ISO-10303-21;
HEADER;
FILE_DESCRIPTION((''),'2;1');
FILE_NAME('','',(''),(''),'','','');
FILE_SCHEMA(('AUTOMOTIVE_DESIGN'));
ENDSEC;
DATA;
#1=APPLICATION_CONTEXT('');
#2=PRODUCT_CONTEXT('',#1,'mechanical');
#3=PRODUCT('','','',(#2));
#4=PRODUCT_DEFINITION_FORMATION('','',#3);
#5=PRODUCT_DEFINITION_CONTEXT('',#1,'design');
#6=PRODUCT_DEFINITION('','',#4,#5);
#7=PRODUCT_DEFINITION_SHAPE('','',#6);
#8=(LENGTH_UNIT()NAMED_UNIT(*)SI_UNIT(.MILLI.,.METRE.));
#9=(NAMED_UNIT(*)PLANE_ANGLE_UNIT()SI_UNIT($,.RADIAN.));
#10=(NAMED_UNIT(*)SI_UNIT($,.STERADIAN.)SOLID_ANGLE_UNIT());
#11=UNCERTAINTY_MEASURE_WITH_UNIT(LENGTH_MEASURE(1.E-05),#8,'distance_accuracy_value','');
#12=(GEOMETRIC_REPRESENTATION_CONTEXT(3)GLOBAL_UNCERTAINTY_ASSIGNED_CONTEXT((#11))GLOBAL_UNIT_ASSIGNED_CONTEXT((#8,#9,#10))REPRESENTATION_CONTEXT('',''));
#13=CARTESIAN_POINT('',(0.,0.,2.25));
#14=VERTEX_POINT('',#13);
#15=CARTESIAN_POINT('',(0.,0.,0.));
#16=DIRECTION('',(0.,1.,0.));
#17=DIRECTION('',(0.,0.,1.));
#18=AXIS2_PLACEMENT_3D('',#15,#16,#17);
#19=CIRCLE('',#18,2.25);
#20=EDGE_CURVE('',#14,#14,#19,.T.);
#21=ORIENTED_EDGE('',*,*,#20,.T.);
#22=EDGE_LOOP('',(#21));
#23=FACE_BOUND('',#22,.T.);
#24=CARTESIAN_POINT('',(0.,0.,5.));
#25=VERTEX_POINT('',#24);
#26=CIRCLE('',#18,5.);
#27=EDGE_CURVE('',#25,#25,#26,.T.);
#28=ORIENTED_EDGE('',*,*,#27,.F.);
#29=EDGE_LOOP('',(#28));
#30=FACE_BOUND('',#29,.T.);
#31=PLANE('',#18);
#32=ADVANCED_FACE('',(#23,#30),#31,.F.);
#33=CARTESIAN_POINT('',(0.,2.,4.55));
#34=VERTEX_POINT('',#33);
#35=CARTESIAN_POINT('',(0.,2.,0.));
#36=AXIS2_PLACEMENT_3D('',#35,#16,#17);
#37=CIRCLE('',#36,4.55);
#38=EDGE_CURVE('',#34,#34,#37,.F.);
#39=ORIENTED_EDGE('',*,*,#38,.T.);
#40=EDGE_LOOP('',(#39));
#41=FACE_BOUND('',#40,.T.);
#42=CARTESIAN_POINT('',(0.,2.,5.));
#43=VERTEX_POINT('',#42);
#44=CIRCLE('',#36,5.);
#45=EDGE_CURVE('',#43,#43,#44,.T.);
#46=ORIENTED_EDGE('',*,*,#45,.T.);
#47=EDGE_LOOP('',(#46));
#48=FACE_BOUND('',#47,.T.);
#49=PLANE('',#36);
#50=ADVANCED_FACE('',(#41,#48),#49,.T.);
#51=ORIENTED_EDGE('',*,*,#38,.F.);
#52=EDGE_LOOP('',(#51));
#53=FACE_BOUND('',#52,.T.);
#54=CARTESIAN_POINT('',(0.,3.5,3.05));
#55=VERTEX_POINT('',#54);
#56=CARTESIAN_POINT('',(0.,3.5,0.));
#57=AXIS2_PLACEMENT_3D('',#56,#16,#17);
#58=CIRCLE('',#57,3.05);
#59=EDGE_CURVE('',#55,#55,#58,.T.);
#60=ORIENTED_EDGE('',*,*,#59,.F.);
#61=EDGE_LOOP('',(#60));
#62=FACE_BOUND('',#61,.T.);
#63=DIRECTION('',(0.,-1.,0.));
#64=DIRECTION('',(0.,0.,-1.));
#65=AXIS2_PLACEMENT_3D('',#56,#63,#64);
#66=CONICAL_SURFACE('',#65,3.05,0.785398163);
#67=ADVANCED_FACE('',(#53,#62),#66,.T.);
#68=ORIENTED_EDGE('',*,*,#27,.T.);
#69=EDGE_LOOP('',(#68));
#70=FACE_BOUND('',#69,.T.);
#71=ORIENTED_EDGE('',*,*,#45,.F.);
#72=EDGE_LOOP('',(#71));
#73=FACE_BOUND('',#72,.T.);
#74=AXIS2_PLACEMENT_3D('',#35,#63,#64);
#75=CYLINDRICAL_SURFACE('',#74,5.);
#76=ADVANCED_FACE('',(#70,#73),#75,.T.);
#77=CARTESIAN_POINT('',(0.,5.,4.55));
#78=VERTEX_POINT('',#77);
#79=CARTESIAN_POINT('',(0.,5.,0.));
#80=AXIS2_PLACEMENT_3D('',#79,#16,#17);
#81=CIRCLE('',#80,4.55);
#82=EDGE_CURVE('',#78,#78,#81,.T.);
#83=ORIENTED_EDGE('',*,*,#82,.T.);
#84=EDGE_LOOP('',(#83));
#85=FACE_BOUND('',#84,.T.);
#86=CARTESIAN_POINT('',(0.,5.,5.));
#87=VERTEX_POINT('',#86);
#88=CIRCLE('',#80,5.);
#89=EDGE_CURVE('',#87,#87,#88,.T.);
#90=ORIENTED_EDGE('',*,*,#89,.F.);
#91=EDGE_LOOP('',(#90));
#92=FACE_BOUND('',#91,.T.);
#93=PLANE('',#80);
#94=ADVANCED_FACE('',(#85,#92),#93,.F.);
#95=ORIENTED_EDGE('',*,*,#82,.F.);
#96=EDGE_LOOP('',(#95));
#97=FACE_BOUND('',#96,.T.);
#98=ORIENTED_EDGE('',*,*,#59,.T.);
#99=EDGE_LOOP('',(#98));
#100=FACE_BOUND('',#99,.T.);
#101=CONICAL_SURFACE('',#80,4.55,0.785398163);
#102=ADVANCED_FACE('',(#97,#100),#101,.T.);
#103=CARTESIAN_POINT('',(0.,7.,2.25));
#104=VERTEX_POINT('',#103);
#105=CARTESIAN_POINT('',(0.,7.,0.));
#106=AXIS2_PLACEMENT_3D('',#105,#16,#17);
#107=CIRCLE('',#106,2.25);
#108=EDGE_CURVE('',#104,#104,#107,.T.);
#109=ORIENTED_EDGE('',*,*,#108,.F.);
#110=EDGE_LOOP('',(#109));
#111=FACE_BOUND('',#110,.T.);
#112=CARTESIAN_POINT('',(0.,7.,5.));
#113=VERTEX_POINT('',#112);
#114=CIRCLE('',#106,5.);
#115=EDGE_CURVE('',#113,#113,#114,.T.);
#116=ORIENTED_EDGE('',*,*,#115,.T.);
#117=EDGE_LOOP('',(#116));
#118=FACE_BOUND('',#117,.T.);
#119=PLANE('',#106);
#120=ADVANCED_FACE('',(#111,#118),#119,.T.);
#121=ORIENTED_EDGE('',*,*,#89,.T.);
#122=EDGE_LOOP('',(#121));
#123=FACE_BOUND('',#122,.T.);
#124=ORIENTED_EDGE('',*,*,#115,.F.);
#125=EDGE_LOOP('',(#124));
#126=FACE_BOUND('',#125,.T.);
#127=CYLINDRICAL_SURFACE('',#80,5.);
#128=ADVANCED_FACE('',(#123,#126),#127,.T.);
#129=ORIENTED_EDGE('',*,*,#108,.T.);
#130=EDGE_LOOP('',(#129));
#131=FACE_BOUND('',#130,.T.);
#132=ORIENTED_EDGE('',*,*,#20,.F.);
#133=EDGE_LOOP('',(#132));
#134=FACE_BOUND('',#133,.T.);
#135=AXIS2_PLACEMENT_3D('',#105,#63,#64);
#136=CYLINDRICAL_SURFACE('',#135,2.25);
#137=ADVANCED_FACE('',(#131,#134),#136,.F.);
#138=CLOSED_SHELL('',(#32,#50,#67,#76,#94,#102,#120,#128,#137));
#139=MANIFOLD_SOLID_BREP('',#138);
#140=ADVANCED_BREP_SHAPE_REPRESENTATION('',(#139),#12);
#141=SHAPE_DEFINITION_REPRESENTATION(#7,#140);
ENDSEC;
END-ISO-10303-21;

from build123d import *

# Parameters (mm, degrees)
SKETCH_1_R      = 3.05
SKETCH_1_R_2    = 2.25
EXTRUDE_1_DEPTH = 7
SKETCH_2_R      = 5
SKETCH_2_R_2    = 2.25
EXTRUDE_2_DEPTH = 2
EXTRUDE_START   = -2
SKETCH_3_R      = 5
SKETCH_3_R_2    = 2.25
EXTRUDE_3_DEPTH = 2
CHAMFER_1_SIZE  = 1.5


with BuildPart() as part:
    # Эскиз1 → Вытянуть-Тонкостенный1 (new body)
    with BuildSketch(Plane(origin=(0, 0, 0), x_dir=(1, 0, 0), z_dir=(0, 1, 0))):
        Circle(SKETCH_1_R)
        Circle(SKETCH_1_R_2, mode=Mode.SUBTRACT)
    extrude(amount=EXTRUDE_1_DEPTH)

    # Эскиз2 → Вытянуть-Тонкостенный2 (add)
    with BuildSketch(Plane(origin=(0, 0, 0), x_dir=(1, 0, 0), z_dir=(0, 1, 0))):
        Circle(SKETCH_2_R)
        Circle(SKETCH_2_R_2, mode=Mode.SUBTRACT)
    extrude(amount=EXTRUDE_2_DEPTH)

    # Эскиз3 → Вытянуть-Тонкостенный3 (add)
    with BuildSketch(Plane(origin=(0, 7, 0), x_dir=(1, 0, 0), z_dir=(0, 1, 0)).offset(EXTRUDE_START)):
        Circle(SKETCH_3_R)
        Circle(SKETCH_3_R_2, mode=Mode.SUBTRACT)
    extrude(amount=EXTRUDE_3_DEPTH)

    # Фаска1
    chamfer_1_edges = [part.edges().sort_by_distance(p)[0] for p in [
        (-3.05, 2, 0),
        (-3.05, 5, 0),
    ]]
    chamfer(chamfer_1_edges, length=CHAMFER_1_SIZE - 0.0001)  # a hair under: the kernel refuses the full size


solid = part.part
